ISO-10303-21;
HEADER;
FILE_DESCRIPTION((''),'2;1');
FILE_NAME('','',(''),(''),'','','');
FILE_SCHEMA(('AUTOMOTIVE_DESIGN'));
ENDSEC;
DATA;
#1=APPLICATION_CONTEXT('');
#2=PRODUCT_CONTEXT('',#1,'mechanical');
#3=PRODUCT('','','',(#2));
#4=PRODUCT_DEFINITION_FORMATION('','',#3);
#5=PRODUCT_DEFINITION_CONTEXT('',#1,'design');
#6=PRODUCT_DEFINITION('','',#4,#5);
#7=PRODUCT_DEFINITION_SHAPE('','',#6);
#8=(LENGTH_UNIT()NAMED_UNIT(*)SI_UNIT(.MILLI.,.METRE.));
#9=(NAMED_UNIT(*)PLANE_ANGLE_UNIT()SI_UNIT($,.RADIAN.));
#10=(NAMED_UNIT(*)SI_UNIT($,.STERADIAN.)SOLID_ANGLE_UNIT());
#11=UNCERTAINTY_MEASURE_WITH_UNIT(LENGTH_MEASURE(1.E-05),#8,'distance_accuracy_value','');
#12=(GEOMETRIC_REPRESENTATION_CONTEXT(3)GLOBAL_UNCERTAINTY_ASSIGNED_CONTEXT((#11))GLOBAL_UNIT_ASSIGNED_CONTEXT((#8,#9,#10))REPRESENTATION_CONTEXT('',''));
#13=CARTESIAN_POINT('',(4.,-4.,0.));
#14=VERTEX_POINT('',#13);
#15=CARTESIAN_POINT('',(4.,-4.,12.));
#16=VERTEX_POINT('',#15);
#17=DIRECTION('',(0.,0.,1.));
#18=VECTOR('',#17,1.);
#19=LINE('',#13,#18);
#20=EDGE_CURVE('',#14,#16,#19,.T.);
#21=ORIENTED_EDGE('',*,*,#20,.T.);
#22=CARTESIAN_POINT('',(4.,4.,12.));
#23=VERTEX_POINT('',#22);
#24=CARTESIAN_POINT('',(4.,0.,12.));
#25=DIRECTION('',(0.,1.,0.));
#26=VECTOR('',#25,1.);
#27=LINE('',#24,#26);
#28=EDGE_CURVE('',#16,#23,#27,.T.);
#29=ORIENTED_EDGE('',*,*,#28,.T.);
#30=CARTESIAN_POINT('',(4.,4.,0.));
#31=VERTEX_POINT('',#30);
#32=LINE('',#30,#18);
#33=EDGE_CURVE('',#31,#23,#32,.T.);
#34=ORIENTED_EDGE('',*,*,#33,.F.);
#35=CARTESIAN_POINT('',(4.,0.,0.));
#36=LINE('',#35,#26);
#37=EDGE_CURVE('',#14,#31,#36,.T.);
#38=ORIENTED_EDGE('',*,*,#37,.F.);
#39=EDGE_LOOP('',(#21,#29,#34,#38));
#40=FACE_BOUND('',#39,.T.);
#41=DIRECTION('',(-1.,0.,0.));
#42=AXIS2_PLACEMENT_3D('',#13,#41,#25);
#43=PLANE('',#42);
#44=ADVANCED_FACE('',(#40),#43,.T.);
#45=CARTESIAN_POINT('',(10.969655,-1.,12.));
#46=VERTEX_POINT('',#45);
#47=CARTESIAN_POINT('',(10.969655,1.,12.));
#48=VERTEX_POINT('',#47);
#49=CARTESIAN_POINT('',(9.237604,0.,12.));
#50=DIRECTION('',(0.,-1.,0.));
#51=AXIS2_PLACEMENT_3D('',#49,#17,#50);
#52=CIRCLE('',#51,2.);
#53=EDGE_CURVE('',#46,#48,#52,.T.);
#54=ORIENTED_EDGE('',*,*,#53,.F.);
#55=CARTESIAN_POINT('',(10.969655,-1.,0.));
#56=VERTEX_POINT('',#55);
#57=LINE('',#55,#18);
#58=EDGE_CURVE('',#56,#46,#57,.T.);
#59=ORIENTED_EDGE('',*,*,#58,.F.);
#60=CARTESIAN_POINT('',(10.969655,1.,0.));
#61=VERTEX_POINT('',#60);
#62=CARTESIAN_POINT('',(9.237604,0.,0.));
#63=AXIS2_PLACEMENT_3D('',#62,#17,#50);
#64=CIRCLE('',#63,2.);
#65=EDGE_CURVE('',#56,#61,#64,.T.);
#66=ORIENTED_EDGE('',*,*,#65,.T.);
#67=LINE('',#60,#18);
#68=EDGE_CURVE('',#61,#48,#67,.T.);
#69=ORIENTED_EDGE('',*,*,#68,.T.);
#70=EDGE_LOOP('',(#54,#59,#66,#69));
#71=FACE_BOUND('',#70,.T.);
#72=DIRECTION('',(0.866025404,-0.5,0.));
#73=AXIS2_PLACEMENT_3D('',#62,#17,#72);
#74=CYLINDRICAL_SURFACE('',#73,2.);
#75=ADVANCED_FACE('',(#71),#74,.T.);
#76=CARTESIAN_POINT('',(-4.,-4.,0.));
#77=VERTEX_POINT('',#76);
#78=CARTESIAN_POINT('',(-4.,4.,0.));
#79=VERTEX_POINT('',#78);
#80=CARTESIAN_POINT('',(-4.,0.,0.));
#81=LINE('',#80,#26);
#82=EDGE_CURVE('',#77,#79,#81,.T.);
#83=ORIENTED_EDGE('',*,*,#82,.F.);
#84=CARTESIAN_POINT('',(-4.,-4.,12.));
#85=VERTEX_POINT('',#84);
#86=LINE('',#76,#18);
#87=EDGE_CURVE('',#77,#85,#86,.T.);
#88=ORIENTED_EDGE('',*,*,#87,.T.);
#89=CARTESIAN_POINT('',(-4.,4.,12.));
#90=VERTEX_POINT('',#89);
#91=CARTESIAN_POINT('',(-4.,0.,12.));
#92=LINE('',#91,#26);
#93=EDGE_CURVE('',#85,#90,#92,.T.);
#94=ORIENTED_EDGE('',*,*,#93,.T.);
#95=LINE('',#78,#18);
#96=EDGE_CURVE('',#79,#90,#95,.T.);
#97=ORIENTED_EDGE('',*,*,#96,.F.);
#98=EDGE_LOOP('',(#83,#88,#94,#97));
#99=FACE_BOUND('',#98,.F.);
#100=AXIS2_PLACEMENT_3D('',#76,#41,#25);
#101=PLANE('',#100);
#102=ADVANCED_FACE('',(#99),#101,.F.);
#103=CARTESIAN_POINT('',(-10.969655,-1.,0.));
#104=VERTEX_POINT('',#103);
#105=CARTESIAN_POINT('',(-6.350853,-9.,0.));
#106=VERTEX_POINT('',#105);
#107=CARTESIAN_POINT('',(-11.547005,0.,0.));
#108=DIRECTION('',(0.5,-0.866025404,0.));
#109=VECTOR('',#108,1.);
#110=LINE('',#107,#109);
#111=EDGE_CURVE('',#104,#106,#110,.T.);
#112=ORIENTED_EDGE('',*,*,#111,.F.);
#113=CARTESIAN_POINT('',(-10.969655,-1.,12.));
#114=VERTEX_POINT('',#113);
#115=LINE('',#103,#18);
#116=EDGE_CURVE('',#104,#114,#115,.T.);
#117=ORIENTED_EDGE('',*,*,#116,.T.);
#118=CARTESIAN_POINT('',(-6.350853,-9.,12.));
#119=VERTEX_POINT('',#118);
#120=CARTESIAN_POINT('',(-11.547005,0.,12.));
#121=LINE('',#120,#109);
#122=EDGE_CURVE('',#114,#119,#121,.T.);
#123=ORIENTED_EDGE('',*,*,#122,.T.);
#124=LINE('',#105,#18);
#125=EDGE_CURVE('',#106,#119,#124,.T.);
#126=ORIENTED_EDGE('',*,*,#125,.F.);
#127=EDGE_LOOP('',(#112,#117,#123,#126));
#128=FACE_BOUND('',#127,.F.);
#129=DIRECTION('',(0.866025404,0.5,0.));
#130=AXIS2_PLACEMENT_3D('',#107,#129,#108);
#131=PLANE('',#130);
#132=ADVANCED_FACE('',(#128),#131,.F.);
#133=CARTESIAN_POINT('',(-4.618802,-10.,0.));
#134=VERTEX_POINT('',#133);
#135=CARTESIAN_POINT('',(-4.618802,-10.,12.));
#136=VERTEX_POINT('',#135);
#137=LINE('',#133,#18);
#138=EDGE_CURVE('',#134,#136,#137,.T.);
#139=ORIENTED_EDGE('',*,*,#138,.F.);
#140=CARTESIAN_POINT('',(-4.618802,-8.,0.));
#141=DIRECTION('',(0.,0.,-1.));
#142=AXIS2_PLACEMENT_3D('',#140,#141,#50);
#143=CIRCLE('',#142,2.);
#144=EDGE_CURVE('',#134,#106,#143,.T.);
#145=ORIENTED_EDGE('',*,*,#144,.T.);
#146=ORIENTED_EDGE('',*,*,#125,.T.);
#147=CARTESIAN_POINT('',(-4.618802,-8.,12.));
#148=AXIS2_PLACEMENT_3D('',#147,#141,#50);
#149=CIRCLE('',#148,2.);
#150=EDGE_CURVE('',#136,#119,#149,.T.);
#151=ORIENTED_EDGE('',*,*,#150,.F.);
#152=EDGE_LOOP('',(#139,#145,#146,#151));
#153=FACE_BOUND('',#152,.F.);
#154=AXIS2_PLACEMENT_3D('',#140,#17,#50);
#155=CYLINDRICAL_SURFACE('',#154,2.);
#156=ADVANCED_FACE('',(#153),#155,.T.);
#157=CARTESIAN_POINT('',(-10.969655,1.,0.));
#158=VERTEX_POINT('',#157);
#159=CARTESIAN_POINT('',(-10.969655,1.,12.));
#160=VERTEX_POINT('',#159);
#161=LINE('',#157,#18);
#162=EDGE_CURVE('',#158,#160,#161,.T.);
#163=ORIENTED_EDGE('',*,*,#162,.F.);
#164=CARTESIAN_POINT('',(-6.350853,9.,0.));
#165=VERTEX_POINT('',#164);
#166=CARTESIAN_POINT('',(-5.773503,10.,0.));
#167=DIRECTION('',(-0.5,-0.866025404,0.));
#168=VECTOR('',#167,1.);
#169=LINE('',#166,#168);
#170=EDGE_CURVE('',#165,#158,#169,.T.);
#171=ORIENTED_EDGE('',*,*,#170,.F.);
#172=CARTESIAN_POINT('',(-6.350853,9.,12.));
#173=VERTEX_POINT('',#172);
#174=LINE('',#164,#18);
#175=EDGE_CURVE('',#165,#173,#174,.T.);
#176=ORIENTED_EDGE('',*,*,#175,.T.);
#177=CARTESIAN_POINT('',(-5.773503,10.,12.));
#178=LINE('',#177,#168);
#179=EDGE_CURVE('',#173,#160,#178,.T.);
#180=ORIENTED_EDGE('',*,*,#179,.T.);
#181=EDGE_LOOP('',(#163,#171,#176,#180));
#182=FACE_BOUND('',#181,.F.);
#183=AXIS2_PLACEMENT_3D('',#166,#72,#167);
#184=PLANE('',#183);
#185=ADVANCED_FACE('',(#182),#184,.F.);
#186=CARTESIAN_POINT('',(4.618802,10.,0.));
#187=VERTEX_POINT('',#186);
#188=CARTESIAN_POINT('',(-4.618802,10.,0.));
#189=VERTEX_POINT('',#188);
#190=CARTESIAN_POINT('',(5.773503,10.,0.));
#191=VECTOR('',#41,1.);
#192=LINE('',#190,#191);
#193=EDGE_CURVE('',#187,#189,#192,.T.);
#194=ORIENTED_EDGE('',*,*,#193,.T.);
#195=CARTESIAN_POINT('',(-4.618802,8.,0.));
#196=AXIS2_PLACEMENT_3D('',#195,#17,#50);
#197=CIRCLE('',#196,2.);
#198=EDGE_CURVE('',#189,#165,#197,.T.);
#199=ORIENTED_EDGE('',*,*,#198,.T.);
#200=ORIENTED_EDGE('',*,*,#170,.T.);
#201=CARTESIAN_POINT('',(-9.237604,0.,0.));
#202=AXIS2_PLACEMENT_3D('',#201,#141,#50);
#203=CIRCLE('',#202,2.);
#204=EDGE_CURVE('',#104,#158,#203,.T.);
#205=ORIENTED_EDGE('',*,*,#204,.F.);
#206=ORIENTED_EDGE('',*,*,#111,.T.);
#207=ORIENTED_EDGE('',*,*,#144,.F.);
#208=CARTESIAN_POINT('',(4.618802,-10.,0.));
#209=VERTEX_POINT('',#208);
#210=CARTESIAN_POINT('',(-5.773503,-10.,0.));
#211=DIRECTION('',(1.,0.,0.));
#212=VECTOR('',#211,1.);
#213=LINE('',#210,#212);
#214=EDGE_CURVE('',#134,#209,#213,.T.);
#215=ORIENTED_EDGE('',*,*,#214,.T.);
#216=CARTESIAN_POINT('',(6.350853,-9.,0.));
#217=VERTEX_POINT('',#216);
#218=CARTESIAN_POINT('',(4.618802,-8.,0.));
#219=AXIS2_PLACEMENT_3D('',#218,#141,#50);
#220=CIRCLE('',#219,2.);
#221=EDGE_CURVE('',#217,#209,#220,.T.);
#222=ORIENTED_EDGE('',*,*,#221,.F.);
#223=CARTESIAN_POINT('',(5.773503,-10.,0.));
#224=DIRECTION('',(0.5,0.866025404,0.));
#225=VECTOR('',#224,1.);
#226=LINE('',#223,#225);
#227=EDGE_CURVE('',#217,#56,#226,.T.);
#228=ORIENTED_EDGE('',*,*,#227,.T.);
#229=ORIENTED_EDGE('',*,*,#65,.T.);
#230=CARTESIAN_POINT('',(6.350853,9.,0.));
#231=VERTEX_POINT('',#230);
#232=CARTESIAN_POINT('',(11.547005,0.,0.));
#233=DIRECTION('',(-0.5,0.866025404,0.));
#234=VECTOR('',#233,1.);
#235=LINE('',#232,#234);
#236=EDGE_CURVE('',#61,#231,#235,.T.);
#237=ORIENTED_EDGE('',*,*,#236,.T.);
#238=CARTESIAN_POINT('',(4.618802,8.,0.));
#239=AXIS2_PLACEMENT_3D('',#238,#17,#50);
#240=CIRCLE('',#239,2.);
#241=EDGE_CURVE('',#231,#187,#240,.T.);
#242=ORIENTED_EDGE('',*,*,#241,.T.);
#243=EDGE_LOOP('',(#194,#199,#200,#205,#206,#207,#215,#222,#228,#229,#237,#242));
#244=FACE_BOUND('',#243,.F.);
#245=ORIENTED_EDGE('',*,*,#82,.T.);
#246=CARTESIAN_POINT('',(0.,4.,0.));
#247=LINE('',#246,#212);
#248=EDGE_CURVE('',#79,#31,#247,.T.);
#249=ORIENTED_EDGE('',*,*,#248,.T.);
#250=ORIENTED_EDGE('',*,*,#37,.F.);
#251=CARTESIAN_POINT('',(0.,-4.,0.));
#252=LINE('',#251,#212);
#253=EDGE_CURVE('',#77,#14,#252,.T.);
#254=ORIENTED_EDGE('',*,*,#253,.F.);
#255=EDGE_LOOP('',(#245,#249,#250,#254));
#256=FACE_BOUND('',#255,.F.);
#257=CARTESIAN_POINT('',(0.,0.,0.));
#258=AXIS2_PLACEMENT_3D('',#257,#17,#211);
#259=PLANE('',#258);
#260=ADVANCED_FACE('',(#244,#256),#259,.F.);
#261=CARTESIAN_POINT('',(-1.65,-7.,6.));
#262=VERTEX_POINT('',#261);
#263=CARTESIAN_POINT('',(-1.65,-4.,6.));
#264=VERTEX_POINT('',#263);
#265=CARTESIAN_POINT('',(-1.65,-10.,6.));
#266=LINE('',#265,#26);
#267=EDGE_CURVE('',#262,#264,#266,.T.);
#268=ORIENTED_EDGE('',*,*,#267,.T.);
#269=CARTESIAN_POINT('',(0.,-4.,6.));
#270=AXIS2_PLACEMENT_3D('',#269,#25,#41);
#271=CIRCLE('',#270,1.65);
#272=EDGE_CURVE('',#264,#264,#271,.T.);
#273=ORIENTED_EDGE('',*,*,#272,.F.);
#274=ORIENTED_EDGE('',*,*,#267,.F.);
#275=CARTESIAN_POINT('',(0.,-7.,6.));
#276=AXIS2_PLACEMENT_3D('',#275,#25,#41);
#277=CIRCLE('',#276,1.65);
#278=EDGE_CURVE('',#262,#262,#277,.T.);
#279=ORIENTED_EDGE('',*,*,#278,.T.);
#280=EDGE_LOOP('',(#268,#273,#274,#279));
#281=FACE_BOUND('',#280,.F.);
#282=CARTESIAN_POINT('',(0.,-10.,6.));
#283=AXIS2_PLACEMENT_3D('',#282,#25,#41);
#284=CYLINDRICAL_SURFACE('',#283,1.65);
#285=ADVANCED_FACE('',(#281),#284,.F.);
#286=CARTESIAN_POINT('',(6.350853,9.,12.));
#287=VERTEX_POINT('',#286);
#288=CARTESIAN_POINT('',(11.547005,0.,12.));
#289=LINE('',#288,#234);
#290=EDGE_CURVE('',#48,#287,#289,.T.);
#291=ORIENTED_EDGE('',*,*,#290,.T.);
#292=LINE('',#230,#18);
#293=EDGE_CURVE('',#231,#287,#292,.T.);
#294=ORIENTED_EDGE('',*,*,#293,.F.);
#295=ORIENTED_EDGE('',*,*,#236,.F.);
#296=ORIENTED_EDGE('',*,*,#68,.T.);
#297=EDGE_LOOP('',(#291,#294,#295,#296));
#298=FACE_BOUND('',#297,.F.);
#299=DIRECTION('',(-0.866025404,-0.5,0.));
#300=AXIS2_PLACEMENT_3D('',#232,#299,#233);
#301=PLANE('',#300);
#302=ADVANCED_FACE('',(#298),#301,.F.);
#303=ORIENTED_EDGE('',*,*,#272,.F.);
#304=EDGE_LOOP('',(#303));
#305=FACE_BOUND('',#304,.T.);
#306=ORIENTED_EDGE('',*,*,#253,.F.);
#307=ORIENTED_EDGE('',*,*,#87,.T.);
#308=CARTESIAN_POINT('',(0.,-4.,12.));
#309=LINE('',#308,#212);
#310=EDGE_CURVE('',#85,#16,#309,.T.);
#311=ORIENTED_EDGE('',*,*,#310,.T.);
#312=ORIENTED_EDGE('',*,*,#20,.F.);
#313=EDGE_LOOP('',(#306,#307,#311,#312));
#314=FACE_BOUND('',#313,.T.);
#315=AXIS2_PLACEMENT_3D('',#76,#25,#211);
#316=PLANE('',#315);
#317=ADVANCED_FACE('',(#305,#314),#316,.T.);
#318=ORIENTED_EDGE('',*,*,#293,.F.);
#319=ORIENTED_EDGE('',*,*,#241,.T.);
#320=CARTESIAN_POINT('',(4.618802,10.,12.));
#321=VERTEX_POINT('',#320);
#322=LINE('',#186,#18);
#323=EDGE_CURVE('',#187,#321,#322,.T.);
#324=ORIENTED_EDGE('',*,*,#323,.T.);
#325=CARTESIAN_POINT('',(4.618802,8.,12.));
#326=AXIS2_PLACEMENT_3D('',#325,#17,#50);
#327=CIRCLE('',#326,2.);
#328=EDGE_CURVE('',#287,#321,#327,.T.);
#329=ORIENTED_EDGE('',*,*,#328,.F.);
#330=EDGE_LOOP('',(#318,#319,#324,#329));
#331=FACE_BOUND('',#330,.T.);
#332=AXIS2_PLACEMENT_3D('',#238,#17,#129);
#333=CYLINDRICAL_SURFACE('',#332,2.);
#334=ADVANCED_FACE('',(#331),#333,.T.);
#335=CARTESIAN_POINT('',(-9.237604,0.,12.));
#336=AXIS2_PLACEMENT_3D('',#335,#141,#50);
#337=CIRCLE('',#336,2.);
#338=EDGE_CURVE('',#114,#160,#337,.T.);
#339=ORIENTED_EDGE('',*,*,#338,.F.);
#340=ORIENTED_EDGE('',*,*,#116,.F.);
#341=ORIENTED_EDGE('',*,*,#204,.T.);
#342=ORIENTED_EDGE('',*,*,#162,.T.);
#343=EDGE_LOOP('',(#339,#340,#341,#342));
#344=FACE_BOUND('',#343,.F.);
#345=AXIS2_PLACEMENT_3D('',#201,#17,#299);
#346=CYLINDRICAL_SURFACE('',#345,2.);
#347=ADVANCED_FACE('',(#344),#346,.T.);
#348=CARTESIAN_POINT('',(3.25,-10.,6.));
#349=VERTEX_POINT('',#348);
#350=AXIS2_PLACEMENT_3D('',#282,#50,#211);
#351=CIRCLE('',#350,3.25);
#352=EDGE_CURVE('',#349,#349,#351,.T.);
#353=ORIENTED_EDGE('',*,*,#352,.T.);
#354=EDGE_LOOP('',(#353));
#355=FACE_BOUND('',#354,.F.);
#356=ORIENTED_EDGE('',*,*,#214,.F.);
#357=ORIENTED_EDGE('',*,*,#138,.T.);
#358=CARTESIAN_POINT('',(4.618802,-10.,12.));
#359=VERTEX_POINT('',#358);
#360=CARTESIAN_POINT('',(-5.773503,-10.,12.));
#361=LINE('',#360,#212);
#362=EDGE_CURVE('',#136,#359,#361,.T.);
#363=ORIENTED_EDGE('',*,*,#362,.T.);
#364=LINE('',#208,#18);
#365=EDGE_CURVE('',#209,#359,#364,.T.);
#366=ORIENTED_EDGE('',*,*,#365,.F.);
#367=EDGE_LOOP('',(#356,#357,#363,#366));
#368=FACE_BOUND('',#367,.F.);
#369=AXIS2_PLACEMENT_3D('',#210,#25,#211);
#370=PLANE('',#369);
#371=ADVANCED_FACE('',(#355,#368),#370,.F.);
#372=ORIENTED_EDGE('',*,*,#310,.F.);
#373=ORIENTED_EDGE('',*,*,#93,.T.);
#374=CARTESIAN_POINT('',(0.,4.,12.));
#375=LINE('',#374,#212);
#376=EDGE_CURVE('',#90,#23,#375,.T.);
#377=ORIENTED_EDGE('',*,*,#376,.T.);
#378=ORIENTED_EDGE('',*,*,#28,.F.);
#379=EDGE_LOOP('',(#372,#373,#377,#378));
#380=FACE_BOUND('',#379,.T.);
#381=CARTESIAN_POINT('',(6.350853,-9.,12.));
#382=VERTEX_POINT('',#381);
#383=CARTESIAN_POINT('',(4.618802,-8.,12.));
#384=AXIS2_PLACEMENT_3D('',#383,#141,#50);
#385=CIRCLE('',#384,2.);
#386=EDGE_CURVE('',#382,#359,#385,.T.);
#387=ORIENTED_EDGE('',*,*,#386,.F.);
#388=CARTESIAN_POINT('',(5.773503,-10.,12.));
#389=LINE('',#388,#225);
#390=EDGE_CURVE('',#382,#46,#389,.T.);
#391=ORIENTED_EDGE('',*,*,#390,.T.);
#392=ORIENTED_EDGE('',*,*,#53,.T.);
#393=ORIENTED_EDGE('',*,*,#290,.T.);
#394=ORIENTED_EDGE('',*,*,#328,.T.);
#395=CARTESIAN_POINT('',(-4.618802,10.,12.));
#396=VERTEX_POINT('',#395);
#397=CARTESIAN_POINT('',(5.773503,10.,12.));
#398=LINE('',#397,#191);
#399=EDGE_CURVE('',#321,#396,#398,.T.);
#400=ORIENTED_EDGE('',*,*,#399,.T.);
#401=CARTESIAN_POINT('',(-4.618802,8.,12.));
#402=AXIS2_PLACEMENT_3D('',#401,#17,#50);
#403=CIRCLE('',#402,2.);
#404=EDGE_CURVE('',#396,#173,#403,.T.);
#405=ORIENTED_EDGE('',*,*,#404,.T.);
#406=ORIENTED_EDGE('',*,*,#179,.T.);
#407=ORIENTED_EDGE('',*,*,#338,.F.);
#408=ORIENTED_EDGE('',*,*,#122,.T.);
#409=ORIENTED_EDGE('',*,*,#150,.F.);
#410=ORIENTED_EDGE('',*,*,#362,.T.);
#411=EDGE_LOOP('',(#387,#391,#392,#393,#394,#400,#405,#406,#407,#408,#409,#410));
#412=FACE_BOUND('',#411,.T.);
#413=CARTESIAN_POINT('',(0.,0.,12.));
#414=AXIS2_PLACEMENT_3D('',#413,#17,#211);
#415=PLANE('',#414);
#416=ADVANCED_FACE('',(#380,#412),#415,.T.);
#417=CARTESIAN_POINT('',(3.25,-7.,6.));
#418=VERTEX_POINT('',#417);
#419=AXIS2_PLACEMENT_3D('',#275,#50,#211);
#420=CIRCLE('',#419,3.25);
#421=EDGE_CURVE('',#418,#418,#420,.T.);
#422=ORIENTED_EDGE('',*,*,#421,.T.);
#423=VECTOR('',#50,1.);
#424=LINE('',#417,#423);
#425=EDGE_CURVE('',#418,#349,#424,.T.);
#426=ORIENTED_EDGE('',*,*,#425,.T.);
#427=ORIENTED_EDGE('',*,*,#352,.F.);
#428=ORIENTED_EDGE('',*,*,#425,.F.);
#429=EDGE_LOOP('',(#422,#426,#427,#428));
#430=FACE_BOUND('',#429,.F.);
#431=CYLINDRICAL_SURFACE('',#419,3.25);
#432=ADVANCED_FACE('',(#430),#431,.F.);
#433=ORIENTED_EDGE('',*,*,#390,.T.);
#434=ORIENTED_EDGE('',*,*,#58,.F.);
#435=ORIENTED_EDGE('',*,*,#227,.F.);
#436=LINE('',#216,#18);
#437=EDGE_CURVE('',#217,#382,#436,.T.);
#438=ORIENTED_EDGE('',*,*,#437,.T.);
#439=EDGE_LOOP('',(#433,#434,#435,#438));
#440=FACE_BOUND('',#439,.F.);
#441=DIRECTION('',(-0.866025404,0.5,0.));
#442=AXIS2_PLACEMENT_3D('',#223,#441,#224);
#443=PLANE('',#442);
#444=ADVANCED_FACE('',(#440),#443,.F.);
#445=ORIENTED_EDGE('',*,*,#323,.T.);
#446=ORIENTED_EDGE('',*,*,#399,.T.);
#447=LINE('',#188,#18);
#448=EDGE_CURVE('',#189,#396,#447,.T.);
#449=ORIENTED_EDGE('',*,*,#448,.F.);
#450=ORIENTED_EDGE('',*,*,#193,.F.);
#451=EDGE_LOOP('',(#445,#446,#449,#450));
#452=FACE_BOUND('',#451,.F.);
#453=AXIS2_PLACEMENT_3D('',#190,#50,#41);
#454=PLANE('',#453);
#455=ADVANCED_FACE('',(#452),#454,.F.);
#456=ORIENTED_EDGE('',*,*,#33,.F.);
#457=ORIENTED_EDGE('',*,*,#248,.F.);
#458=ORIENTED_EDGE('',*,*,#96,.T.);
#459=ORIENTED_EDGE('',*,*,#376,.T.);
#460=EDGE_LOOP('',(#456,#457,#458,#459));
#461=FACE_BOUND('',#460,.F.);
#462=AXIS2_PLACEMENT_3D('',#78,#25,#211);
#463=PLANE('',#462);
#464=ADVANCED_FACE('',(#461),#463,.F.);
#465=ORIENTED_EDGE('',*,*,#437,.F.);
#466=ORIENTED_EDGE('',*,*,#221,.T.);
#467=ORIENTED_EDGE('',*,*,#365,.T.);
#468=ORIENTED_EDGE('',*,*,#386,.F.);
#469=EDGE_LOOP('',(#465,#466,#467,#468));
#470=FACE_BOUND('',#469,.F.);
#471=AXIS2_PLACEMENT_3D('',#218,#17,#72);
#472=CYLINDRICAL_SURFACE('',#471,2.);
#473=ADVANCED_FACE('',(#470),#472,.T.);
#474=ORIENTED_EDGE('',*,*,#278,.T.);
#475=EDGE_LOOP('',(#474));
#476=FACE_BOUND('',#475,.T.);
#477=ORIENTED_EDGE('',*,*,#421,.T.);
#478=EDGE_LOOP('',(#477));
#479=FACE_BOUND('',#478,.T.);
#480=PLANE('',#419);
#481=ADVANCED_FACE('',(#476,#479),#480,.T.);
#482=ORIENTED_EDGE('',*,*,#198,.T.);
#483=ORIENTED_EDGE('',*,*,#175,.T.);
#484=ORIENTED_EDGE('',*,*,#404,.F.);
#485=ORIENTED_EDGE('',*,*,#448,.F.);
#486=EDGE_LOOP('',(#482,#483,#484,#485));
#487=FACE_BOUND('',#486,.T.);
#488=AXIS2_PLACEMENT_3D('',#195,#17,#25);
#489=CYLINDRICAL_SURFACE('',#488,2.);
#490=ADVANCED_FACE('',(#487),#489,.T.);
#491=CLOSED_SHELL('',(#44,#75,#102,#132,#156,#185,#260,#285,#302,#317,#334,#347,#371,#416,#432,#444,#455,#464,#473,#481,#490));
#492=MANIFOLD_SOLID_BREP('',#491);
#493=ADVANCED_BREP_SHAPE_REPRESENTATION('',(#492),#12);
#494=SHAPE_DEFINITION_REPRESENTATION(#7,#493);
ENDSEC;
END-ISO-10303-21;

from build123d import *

# Parameters (mm, degrees)
F0_W           = 8
F0_H           = 8
F1_DEPTH       = 12
F3_D           = 3.3
F3_DEPTH       = 12
F3_CBORE_D     = 6.5
F3_CBORE_DEPTH = 3
F3_TIP         = 0.9914200214
F4_R           = 2


with BuildPart() as f1:
    # F0 (on Top) → F1 (new body)
    with BuildSketch(Plane.XY):
        Polygon((5.7735026919, -10), (11.5470053838, 0), (5.7735026919, 10), (-5.7735026919, 10), (-11.5470053838, 0), (-5.7735026919, -10), align=None)
        Rectangle(F0_W, F0_H, mode=Mode.SUBTRACT)
    extrude(amount=F1_DEPTH)

    # F3
    with Locations(Plane.XZ.offset(10)):
        with Locations((0, 6)):
            CounterBoreHole(F3_D / 2, F3_CBORE_D / 2, F3_CBORE_DEPTH, depth=F3_DEPTH)
            with Locations((0, 0, -(F3_DEPTH + F3_TIP / 2))):  # 118° drill point
                Cone(0, F3_D / 2, F3_TIP, mode=Mode.SUBTRACT)

    # F4
    f4_edges = [f1.edges().sort_by_distance(p)[0] for p in [
        (-11.547005, 0, 6),
        (-5.773503, -10, 6),
        (5.773503, -10, 6),
        (11.547005, 0, 6),
        (5.773503, 10, 6),
        (-5.773503, 10, 6),
    ]]
    fillet(f4_edges, radius=F4_R)


solid = f1.part
